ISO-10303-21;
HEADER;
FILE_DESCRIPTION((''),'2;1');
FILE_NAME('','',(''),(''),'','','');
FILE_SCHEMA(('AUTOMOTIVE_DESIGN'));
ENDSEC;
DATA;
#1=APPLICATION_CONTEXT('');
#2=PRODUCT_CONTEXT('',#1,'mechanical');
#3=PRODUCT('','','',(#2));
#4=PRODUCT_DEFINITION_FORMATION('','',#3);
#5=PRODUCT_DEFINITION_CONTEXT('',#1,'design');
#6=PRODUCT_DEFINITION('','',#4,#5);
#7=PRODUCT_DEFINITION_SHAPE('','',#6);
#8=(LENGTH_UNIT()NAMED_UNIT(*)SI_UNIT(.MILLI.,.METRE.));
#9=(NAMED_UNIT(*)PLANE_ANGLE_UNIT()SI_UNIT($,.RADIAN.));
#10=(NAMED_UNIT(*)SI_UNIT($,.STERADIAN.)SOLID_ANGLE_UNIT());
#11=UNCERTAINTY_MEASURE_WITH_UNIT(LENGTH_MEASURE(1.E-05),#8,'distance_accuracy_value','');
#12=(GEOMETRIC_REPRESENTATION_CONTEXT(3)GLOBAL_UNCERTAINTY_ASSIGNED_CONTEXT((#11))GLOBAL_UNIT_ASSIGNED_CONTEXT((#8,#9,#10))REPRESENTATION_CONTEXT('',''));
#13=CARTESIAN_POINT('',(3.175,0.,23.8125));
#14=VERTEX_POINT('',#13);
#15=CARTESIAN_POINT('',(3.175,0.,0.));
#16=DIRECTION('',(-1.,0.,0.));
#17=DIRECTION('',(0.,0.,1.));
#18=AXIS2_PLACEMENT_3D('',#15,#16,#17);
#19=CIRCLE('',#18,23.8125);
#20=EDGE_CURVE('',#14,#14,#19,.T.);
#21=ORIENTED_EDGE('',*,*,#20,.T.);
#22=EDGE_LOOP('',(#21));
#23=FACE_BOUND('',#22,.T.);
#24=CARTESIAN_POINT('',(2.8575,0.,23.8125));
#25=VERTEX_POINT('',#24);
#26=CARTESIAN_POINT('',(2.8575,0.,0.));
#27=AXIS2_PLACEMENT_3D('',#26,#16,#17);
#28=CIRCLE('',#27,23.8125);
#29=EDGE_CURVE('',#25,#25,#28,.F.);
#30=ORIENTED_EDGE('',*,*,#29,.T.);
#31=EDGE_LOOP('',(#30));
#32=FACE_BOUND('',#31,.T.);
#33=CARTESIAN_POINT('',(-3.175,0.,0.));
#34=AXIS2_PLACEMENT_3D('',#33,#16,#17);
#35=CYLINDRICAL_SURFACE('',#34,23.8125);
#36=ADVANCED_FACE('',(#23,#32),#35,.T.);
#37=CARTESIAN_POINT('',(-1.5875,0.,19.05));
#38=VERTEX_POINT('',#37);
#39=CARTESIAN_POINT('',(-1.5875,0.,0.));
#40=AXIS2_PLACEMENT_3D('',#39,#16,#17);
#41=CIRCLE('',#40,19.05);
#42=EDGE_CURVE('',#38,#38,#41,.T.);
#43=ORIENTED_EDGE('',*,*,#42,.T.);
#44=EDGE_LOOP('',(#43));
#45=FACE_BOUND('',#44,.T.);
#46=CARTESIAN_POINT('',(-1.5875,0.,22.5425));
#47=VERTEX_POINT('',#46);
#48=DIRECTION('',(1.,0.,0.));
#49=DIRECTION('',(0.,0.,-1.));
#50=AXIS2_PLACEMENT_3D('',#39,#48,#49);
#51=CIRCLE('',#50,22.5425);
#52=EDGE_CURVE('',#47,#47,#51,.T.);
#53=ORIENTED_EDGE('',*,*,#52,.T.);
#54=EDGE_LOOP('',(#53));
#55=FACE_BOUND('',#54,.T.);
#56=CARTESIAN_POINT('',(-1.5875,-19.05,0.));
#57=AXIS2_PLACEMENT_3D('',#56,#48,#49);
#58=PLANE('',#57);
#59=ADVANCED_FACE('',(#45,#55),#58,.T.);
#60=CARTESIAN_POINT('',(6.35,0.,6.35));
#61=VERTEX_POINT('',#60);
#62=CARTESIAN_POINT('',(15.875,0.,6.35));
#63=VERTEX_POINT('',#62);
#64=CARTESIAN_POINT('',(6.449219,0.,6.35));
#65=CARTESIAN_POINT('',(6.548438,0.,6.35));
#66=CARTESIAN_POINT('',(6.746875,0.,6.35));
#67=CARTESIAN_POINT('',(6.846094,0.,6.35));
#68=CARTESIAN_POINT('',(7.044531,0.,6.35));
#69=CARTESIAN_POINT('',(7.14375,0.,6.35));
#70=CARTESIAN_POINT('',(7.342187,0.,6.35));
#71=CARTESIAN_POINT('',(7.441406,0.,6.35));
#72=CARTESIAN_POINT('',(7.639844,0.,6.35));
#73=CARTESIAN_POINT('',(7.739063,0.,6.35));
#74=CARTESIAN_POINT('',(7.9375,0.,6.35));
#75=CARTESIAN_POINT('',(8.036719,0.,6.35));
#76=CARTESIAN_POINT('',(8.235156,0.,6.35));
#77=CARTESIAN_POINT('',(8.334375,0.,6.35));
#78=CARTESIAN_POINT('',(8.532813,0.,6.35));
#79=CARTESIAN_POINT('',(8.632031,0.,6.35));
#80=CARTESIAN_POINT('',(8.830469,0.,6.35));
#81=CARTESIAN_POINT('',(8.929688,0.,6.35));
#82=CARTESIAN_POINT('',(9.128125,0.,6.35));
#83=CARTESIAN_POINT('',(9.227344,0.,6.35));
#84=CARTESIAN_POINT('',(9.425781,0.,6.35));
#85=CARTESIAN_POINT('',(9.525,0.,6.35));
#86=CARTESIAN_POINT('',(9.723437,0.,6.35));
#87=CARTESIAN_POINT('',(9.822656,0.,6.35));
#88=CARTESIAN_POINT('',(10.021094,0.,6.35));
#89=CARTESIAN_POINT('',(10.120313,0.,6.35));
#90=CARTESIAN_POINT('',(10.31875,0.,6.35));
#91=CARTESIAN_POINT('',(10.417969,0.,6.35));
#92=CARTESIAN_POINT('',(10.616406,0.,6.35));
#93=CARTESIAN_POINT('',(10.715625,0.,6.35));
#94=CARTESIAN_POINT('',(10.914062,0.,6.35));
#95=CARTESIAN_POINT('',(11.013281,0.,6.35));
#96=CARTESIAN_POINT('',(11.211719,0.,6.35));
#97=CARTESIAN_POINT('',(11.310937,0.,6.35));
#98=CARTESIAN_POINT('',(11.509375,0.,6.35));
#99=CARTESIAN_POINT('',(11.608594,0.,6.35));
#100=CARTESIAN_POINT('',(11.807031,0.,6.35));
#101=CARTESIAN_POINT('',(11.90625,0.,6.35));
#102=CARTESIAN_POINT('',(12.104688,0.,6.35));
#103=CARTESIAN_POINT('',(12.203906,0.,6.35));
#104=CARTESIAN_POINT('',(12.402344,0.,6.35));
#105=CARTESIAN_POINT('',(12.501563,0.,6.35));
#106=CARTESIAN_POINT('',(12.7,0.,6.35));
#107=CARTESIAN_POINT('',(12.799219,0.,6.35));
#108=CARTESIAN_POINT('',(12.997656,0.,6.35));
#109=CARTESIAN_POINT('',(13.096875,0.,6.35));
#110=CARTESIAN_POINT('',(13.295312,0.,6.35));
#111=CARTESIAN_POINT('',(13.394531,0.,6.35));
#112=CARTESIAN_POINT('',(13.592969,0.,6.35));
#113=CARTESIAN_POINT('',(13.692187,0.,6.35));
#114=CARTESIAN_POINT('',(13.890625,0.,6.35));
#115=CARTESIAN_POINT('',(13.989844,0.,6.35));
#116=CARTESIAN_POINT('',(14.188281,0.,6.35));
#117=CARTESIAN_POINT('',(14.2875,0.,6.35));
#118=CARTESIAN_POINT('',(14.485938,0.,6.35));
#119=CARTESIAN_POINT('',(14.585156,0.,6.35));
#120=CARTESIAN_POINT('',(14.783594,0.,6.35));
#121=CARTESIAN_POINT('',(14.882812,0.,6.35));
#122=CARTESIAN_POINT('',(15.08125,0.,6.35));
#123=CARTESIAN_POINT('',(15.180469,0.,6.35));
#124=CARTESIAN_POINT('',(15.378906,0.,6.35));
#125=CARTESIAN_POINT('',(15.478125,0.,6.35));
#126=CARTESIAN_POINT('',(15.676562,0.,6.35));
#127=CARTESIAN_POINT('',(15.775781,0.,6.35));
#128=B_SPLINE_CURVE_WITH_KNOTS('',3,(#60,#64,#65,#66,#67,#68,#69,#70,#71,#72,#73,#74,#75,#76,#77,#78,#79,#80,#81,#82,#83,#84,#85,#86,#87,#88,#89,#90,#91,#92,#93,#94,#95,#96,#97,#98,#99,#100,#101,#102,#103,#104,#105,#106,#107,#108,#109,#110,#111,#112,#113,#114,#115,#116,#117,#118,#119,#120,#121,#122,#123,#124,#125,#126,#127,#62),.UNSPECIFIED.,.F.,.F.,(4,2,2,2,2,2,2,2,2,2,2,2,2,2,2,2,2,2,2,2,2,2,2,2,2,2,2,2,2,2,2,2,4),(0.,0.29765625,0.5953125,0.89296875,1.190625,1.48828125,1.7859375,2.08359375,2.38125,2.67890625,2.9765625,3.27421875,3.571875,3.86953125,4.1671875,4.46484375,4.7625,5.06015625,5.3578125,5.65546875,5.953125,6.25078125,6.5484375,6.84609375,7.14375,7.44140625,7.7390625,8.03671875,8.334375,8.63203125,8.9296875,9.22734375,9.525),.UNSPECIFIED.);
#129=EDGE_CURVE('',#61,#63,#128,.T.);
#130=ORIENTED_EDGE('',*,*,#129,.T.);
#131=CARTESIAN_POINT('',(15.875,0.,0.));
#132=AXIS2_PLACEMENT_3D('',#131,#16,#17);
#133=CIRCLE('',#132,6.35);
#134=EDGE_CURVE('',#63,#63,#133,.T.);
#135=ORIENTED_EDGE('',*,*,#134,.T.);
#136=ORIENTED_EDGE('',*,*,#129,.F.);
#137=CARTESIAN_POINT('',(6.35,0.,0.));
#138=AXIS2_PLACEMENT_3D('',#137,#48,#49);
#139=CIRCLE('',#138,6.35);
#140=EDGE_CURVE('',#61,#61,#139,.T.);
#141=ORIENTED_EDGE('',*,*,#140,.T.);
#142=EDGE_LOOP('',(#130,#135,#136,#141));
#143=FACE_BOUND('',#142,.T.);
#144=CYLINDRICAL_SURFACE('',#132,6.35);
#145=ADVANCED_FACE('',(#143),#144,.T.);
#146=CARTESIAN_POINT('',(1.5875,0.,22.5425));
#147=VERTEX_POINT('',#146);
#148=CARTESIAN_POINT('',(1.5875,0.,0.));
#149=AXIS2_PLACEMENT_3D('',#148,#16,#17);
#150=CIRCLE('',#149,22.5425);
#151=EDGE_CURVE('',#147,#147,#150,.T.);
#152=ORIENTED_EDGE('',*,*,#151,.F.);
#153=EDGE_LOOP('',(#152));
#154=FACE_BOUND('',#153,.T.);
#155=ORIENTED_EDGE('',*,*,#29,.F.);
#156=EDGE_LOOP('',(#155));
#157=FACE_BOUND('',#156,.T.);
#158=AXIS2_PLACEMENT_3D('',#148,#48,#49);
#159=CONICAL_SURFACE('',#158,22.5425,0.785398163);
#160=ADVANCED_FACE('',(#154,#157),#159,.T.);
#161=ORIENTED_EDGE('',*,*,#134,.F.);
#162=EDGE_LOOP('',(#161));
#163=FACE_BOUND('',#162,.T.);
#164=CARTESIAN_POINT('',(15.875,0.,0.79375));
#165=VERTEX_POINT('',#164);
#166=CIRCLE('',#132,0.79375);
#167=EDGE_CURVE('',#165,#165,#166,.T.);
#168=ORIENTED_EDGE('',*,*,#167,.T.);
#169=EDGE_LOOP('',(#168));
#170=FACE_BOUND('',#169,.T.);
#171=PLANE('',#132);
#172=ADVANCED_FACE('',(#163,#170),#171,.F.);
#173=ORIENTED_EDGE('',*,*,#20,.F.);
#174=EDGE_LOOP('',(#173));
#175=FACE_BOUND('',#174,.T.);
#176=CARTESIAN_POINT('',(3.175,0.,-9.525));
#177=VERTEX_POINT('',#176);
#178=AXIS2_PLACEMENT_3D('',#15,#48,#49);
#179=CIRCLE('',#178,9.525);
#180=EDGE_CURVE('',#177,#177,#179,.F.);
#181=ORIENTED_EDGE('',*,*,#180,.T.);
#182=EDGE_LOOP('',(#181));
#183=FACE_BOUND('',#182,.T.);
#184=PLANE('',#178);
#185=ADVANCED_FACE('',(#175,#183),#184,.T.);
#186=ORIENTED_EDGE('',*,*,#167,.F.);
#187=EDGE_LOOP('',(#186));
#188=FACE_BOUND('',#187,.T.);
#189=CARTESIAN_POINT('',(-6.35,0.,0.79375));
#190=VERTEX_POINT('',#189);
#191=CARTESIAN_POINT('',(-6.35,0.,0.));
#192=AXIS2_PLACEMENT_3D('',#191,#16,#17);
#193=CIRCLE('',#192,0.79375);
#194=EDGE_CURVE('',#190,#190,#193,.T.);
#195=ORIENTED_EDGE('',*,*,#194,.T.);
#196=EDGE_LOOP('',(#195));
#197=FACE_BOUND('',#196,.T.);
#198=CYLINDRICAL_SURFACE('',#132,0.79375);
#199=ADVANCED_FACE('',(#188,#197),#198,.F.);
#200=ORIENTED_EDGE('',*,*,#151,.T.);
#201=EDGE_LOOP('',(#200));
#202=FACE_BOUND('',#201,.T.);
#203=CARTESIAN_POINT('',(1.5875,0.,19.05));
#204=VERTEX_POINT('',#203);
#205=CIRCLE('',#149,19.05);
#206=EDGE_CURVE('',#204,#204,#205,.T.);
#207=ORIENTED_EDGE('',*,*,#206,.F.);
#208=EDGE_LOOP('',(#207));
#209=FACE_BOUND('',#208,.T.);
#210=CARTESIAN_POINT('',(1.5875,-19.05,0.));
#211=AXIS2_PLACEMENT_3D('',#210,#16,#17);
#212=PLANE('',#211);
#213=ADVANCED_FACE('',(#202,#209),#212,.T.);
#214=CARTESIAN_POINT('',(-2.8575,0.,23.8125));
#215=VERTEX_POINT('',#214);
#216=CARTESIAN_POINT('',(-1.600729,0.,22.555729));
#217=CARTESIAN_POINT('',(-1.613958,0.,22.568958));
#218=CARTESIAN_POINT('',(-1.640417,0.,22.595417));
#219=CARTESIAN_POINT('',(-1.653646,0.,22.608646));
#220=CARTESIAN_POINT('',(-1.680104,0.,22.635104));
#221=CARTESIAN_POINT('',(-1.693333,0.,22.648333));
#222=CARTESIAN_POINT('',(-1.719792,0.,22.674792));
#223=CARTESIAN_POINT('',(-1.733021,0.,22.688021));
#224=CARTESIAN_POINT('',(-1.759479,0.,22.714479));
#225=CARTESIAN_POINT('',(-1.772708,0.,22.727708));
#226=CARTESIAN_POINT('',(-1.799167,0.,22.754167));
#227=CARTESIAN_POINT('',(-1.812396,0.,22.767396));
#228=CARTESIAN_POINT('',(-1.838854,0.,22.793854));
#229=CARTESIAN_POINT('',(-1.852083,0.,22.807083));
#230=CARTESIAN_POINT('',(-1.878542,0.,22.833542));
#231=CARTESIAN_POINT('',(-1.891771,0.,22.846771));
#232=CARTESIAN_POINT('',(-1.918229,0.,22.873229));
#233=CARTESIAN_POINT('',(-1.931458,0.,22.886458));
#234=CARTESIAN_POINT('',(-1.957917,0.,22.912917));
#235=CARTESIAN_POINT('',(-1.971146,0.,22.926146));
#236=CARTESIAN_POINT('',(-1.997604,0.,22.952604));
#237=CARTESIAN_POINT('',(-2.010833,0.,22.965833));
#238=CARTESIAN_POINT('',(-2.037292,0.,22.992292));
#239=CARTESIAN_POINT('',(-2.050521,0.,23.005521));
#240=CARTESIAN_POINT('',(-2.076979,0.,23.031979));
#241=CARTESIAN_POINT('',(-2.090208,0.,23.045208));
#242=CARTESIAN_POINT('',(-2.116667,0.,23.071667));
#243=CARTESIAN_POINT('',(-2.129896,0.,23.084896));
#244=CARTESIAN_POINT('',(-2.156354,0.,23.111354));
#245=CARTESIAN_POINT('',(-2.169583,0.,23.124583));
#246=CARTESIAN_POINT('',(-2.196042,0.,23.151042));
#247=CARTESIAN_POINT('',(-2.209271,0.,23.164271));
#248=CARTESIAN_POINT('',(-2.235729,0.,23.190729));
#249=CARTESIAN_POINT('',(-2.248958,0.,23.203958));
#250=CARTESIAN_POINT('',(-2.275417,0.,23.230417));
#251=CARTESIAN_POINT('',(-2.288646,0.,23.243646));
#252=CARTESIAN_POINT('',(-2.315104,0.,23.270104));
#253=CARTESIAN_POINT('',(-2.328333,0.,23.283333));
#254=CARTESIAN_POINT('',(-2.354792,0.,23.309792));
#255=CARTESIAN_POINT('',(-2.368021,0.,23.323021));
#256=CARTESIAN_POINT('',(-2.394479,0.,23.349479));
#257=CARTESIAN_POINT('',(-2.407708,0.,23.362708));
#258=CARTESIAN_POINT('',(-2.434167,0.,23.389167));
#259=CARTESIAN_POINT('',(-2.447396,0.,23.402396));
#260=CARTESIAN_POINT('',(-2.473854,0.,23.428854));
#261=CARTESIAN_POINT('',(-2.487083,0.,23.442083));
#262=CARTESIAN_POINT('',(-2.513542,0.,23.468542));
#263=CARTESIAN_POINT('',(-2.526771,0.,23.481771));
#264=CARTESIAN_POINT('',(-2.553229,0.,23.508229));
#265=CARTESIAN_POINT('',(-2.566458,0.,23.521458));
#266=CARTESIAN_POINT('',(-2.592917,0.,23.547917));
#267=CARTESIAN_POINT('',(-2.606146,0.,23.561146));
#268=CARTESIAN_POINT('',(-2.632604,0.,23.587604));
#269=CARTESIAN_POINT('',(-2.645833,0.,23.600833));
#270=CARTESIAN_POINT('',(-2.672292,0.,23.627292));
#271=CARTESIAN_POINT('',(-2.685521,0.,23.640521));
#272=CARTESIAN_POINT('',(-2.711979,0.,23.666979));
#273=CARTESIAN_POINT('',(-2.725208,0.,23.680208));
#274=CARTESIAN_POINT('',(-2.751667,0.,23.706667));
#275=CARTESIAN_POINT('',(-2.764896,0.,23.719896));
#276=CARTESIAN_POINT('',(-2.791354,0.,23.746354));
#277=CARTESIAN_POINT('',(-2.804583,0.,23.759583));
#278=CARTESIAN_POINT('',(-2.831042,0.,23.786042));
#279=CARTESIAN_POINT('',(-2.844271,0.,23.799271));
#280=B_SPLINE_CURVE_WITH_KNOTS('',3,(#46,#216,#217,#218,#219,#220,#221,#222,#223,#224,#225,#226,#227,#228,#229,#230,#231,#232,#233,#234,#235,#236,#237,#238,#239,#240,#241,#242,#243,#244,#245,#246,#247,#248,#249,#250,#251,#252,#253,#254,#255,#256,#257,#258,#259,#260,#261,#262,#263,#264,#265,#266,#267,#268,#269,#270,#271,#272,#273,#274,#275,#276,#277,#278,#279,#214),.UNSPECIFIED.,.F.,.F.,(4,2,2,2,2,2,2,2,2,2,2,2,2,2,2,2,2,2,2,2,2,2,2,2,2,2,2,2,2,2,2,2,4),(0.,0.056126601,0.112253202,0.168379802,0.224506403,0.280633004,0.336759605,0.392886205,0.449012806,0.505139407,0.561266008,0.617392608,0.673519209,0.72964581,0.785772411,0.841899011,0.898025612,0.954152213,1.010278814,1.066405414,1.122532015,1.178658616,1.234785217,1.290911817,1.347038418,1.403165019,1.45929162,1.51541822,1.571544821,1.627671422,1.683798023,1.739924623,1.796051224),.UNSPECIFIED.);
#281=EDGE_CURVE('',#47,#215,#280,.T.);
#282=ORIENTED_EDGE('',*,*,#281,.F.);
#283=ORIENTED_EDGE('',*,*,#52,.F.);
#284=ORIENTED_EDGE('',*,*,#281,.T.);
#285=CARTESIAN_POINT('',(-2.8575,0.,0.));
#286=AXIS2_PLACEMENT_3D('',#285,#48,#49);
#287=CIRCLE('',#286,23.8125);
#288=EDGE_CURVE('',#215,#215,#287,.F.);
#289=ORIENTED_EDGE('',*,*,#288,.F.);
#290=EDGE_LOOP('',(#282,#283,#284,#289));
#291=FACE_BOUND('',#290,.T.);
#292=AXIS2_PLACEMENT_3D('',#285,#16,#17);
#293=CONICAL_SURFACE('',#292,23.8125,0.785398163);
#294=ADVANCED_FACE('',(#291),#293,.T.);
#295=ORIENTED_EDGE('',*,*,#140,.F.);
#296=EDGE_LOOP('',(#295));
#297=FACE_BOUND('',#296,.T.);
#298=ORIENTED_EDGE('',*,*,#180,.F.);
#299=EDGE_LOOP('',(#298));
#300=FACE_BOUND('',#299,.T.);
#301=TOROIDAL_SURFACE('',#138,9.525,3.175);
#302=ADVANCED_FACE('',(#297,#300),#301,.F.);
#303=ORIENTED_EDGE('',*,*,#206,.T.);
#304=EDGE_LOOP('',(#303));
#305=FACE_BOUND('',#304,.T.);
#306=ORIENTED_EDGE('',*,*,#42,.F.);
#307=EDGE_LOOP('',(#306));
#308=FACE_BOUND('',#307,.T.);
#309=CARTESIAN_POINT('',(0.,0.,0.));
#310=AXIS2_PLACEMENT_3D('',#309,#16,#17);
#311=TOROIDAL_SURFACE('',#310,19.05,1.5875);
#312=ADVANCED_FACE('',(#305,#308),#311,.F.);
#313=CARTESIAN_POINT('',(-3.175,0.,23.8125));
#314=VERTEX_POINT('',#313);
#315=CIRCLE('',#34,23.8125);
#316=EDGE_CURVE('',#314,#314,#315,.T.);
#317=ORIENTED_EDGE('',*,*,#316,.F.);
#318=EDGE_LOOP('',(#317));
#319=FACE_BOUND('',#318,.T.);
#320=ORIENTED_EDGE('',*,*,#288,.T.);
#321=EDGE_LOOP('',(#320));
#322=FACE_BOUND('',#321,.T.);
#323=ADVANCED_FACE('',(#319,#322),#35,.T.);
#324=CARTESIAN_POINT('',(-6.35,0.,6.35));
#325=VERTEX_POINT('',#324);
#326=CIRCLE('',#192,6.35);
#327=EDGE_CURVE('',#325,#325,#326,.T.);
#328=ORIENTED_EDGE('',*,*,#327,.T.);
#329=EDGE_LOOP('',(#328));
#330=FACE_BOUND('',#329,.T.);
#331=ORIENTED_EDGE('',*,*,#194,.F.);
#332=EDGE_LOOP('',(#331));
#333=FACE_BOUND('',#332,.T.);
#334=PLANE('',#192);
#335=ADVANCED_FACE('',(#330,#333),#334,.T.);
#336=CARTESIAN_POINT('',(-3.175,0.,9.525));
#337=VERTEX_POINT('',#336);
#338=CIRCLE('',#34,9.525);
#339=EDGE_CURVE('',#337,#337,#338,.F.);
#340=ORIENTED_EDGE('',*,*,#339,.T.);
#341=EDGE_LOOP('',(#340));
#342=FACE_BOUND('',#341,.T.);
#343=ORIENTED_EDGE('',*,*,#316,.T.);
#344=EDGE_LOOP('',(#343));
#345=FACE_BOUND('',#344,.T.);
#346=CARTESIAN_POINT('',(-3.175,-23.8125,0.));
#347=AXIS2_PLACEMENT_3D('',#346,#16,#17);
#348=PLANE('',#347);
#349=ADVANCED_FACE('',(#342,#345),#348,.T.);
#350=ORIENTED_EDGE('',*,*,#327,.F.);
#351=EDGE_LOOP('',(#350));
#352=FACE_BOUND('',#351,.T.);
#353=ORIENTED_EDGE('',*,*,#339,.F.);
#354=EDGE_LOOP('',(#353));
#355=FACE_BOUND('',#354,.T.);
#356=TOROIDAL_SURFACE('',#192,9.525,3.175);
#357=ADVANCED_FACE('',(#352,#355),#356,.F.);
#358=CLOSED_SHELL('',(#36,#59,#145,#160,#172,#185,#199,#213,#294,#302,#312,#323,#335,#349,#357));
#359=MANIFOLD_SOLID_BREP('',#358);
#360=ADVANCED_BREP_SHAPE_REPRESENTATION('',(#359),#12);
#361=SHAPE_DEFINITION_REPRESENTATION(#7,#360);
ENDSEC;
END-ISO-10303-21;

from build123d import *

# Parameters (mm, degrees)
BOSS_EXTRUDE1_DEPTH      = 3.175
BOSS_EXTRUDE1_DEPTH_BACK = 19.05
SKETCH2_R                = 6.35
CUT_EXTRUDE1_DEPTH       = 41.348741461
CUT_EXTRUDE1_DEPTH_BACK  = 41.348741461
SKETCH3_R                = 0.79375
FILLET1_R                = 3.175
CHAMFER1_SIZE            = 1.27


with BuildPart() as part:
    # Sketch1 → Revolve1 (revolve)
    with BuildSketch(Plane.XY, mode=Mode.PRIVATE) as revolve1_sk:
        with BuildLine():
            Line((-1.5875, -19.05), (-1.5875, -23.8125))
            Line((-1.5875, -23.8125), (-3.175, -23.8125))
            Line((-3.175, -23.8125), (-3.175, 0))
            Line((-3.175, 0), (3.175, 0))
            Line((3.175, 0), (3.175, -23.8125))
            Line((3.175, -23.8125), (1.5875, -23.8125))
            Line((1.5875, -23.8125), (1.5875, -19.05))
            ThreePointArc((1.5875, -19.05), (0, -17.4625), (-1.5875, -19.05))
        make_face()
    revolve(revolve1_sk.sketch.rotate(Axis((-3.175, 0, 0), (1, 0, 0)), 270), axis=Axis((-3.175, 0, 0), (1, 0, 0)))

    # Sketch2 → Boss-Extrude1 (add, two sides: drawn at the far end of the back side and taken through both)
    with BuildSketch(Plane.ZY.offset(3.175).offset(-BOSS_EXTRUDE1_DEPTH_BACK)):
        Circle(SKETCH2_R)
    extrude(amount=BOSS_EXTRUDE1_DEPTH + BOSS_EXTRUDE1_DEPTH_BACK)

    # Sketch3 → Cut-Extrude1 (cut, two sides: drawn at the far end of the back side and taken through both)
    with BuildSketch(Plane.ZY.offset(6.35).offset(-CUT_EXTRUDE1_DEPTH_BACK)):
        Circle(SKETCH3_R)
    extrude(amount=CUT_EXTRUDE1_DEPTH + CUT_EXTRUDE1_DEPTH_BACK, mode=Mode.SUBTRACT)

    # Fillet1
    fillet1_edges = [part.edges().sort_by_distance(p)[0] for p in [
        (-3.175, 0, -6.35),
        (3.175, 0, -6.35),
    ]]
    fillet(fillet1_edges, radius=FILLET1_R - 0.0001)  # a hair under: the kernel refuses the full size

    # Chamfer1
    chamfer1_edges = [part.edges().sort_by_distance(p)[0] for p in [
        (-1.5875, 0, -23.8125),
        (1.5875, 0, -23.8125),
    ]]
    chamfer(chamfer1_edges, length=CHAMFER1_SIZE)


solid = part.part
